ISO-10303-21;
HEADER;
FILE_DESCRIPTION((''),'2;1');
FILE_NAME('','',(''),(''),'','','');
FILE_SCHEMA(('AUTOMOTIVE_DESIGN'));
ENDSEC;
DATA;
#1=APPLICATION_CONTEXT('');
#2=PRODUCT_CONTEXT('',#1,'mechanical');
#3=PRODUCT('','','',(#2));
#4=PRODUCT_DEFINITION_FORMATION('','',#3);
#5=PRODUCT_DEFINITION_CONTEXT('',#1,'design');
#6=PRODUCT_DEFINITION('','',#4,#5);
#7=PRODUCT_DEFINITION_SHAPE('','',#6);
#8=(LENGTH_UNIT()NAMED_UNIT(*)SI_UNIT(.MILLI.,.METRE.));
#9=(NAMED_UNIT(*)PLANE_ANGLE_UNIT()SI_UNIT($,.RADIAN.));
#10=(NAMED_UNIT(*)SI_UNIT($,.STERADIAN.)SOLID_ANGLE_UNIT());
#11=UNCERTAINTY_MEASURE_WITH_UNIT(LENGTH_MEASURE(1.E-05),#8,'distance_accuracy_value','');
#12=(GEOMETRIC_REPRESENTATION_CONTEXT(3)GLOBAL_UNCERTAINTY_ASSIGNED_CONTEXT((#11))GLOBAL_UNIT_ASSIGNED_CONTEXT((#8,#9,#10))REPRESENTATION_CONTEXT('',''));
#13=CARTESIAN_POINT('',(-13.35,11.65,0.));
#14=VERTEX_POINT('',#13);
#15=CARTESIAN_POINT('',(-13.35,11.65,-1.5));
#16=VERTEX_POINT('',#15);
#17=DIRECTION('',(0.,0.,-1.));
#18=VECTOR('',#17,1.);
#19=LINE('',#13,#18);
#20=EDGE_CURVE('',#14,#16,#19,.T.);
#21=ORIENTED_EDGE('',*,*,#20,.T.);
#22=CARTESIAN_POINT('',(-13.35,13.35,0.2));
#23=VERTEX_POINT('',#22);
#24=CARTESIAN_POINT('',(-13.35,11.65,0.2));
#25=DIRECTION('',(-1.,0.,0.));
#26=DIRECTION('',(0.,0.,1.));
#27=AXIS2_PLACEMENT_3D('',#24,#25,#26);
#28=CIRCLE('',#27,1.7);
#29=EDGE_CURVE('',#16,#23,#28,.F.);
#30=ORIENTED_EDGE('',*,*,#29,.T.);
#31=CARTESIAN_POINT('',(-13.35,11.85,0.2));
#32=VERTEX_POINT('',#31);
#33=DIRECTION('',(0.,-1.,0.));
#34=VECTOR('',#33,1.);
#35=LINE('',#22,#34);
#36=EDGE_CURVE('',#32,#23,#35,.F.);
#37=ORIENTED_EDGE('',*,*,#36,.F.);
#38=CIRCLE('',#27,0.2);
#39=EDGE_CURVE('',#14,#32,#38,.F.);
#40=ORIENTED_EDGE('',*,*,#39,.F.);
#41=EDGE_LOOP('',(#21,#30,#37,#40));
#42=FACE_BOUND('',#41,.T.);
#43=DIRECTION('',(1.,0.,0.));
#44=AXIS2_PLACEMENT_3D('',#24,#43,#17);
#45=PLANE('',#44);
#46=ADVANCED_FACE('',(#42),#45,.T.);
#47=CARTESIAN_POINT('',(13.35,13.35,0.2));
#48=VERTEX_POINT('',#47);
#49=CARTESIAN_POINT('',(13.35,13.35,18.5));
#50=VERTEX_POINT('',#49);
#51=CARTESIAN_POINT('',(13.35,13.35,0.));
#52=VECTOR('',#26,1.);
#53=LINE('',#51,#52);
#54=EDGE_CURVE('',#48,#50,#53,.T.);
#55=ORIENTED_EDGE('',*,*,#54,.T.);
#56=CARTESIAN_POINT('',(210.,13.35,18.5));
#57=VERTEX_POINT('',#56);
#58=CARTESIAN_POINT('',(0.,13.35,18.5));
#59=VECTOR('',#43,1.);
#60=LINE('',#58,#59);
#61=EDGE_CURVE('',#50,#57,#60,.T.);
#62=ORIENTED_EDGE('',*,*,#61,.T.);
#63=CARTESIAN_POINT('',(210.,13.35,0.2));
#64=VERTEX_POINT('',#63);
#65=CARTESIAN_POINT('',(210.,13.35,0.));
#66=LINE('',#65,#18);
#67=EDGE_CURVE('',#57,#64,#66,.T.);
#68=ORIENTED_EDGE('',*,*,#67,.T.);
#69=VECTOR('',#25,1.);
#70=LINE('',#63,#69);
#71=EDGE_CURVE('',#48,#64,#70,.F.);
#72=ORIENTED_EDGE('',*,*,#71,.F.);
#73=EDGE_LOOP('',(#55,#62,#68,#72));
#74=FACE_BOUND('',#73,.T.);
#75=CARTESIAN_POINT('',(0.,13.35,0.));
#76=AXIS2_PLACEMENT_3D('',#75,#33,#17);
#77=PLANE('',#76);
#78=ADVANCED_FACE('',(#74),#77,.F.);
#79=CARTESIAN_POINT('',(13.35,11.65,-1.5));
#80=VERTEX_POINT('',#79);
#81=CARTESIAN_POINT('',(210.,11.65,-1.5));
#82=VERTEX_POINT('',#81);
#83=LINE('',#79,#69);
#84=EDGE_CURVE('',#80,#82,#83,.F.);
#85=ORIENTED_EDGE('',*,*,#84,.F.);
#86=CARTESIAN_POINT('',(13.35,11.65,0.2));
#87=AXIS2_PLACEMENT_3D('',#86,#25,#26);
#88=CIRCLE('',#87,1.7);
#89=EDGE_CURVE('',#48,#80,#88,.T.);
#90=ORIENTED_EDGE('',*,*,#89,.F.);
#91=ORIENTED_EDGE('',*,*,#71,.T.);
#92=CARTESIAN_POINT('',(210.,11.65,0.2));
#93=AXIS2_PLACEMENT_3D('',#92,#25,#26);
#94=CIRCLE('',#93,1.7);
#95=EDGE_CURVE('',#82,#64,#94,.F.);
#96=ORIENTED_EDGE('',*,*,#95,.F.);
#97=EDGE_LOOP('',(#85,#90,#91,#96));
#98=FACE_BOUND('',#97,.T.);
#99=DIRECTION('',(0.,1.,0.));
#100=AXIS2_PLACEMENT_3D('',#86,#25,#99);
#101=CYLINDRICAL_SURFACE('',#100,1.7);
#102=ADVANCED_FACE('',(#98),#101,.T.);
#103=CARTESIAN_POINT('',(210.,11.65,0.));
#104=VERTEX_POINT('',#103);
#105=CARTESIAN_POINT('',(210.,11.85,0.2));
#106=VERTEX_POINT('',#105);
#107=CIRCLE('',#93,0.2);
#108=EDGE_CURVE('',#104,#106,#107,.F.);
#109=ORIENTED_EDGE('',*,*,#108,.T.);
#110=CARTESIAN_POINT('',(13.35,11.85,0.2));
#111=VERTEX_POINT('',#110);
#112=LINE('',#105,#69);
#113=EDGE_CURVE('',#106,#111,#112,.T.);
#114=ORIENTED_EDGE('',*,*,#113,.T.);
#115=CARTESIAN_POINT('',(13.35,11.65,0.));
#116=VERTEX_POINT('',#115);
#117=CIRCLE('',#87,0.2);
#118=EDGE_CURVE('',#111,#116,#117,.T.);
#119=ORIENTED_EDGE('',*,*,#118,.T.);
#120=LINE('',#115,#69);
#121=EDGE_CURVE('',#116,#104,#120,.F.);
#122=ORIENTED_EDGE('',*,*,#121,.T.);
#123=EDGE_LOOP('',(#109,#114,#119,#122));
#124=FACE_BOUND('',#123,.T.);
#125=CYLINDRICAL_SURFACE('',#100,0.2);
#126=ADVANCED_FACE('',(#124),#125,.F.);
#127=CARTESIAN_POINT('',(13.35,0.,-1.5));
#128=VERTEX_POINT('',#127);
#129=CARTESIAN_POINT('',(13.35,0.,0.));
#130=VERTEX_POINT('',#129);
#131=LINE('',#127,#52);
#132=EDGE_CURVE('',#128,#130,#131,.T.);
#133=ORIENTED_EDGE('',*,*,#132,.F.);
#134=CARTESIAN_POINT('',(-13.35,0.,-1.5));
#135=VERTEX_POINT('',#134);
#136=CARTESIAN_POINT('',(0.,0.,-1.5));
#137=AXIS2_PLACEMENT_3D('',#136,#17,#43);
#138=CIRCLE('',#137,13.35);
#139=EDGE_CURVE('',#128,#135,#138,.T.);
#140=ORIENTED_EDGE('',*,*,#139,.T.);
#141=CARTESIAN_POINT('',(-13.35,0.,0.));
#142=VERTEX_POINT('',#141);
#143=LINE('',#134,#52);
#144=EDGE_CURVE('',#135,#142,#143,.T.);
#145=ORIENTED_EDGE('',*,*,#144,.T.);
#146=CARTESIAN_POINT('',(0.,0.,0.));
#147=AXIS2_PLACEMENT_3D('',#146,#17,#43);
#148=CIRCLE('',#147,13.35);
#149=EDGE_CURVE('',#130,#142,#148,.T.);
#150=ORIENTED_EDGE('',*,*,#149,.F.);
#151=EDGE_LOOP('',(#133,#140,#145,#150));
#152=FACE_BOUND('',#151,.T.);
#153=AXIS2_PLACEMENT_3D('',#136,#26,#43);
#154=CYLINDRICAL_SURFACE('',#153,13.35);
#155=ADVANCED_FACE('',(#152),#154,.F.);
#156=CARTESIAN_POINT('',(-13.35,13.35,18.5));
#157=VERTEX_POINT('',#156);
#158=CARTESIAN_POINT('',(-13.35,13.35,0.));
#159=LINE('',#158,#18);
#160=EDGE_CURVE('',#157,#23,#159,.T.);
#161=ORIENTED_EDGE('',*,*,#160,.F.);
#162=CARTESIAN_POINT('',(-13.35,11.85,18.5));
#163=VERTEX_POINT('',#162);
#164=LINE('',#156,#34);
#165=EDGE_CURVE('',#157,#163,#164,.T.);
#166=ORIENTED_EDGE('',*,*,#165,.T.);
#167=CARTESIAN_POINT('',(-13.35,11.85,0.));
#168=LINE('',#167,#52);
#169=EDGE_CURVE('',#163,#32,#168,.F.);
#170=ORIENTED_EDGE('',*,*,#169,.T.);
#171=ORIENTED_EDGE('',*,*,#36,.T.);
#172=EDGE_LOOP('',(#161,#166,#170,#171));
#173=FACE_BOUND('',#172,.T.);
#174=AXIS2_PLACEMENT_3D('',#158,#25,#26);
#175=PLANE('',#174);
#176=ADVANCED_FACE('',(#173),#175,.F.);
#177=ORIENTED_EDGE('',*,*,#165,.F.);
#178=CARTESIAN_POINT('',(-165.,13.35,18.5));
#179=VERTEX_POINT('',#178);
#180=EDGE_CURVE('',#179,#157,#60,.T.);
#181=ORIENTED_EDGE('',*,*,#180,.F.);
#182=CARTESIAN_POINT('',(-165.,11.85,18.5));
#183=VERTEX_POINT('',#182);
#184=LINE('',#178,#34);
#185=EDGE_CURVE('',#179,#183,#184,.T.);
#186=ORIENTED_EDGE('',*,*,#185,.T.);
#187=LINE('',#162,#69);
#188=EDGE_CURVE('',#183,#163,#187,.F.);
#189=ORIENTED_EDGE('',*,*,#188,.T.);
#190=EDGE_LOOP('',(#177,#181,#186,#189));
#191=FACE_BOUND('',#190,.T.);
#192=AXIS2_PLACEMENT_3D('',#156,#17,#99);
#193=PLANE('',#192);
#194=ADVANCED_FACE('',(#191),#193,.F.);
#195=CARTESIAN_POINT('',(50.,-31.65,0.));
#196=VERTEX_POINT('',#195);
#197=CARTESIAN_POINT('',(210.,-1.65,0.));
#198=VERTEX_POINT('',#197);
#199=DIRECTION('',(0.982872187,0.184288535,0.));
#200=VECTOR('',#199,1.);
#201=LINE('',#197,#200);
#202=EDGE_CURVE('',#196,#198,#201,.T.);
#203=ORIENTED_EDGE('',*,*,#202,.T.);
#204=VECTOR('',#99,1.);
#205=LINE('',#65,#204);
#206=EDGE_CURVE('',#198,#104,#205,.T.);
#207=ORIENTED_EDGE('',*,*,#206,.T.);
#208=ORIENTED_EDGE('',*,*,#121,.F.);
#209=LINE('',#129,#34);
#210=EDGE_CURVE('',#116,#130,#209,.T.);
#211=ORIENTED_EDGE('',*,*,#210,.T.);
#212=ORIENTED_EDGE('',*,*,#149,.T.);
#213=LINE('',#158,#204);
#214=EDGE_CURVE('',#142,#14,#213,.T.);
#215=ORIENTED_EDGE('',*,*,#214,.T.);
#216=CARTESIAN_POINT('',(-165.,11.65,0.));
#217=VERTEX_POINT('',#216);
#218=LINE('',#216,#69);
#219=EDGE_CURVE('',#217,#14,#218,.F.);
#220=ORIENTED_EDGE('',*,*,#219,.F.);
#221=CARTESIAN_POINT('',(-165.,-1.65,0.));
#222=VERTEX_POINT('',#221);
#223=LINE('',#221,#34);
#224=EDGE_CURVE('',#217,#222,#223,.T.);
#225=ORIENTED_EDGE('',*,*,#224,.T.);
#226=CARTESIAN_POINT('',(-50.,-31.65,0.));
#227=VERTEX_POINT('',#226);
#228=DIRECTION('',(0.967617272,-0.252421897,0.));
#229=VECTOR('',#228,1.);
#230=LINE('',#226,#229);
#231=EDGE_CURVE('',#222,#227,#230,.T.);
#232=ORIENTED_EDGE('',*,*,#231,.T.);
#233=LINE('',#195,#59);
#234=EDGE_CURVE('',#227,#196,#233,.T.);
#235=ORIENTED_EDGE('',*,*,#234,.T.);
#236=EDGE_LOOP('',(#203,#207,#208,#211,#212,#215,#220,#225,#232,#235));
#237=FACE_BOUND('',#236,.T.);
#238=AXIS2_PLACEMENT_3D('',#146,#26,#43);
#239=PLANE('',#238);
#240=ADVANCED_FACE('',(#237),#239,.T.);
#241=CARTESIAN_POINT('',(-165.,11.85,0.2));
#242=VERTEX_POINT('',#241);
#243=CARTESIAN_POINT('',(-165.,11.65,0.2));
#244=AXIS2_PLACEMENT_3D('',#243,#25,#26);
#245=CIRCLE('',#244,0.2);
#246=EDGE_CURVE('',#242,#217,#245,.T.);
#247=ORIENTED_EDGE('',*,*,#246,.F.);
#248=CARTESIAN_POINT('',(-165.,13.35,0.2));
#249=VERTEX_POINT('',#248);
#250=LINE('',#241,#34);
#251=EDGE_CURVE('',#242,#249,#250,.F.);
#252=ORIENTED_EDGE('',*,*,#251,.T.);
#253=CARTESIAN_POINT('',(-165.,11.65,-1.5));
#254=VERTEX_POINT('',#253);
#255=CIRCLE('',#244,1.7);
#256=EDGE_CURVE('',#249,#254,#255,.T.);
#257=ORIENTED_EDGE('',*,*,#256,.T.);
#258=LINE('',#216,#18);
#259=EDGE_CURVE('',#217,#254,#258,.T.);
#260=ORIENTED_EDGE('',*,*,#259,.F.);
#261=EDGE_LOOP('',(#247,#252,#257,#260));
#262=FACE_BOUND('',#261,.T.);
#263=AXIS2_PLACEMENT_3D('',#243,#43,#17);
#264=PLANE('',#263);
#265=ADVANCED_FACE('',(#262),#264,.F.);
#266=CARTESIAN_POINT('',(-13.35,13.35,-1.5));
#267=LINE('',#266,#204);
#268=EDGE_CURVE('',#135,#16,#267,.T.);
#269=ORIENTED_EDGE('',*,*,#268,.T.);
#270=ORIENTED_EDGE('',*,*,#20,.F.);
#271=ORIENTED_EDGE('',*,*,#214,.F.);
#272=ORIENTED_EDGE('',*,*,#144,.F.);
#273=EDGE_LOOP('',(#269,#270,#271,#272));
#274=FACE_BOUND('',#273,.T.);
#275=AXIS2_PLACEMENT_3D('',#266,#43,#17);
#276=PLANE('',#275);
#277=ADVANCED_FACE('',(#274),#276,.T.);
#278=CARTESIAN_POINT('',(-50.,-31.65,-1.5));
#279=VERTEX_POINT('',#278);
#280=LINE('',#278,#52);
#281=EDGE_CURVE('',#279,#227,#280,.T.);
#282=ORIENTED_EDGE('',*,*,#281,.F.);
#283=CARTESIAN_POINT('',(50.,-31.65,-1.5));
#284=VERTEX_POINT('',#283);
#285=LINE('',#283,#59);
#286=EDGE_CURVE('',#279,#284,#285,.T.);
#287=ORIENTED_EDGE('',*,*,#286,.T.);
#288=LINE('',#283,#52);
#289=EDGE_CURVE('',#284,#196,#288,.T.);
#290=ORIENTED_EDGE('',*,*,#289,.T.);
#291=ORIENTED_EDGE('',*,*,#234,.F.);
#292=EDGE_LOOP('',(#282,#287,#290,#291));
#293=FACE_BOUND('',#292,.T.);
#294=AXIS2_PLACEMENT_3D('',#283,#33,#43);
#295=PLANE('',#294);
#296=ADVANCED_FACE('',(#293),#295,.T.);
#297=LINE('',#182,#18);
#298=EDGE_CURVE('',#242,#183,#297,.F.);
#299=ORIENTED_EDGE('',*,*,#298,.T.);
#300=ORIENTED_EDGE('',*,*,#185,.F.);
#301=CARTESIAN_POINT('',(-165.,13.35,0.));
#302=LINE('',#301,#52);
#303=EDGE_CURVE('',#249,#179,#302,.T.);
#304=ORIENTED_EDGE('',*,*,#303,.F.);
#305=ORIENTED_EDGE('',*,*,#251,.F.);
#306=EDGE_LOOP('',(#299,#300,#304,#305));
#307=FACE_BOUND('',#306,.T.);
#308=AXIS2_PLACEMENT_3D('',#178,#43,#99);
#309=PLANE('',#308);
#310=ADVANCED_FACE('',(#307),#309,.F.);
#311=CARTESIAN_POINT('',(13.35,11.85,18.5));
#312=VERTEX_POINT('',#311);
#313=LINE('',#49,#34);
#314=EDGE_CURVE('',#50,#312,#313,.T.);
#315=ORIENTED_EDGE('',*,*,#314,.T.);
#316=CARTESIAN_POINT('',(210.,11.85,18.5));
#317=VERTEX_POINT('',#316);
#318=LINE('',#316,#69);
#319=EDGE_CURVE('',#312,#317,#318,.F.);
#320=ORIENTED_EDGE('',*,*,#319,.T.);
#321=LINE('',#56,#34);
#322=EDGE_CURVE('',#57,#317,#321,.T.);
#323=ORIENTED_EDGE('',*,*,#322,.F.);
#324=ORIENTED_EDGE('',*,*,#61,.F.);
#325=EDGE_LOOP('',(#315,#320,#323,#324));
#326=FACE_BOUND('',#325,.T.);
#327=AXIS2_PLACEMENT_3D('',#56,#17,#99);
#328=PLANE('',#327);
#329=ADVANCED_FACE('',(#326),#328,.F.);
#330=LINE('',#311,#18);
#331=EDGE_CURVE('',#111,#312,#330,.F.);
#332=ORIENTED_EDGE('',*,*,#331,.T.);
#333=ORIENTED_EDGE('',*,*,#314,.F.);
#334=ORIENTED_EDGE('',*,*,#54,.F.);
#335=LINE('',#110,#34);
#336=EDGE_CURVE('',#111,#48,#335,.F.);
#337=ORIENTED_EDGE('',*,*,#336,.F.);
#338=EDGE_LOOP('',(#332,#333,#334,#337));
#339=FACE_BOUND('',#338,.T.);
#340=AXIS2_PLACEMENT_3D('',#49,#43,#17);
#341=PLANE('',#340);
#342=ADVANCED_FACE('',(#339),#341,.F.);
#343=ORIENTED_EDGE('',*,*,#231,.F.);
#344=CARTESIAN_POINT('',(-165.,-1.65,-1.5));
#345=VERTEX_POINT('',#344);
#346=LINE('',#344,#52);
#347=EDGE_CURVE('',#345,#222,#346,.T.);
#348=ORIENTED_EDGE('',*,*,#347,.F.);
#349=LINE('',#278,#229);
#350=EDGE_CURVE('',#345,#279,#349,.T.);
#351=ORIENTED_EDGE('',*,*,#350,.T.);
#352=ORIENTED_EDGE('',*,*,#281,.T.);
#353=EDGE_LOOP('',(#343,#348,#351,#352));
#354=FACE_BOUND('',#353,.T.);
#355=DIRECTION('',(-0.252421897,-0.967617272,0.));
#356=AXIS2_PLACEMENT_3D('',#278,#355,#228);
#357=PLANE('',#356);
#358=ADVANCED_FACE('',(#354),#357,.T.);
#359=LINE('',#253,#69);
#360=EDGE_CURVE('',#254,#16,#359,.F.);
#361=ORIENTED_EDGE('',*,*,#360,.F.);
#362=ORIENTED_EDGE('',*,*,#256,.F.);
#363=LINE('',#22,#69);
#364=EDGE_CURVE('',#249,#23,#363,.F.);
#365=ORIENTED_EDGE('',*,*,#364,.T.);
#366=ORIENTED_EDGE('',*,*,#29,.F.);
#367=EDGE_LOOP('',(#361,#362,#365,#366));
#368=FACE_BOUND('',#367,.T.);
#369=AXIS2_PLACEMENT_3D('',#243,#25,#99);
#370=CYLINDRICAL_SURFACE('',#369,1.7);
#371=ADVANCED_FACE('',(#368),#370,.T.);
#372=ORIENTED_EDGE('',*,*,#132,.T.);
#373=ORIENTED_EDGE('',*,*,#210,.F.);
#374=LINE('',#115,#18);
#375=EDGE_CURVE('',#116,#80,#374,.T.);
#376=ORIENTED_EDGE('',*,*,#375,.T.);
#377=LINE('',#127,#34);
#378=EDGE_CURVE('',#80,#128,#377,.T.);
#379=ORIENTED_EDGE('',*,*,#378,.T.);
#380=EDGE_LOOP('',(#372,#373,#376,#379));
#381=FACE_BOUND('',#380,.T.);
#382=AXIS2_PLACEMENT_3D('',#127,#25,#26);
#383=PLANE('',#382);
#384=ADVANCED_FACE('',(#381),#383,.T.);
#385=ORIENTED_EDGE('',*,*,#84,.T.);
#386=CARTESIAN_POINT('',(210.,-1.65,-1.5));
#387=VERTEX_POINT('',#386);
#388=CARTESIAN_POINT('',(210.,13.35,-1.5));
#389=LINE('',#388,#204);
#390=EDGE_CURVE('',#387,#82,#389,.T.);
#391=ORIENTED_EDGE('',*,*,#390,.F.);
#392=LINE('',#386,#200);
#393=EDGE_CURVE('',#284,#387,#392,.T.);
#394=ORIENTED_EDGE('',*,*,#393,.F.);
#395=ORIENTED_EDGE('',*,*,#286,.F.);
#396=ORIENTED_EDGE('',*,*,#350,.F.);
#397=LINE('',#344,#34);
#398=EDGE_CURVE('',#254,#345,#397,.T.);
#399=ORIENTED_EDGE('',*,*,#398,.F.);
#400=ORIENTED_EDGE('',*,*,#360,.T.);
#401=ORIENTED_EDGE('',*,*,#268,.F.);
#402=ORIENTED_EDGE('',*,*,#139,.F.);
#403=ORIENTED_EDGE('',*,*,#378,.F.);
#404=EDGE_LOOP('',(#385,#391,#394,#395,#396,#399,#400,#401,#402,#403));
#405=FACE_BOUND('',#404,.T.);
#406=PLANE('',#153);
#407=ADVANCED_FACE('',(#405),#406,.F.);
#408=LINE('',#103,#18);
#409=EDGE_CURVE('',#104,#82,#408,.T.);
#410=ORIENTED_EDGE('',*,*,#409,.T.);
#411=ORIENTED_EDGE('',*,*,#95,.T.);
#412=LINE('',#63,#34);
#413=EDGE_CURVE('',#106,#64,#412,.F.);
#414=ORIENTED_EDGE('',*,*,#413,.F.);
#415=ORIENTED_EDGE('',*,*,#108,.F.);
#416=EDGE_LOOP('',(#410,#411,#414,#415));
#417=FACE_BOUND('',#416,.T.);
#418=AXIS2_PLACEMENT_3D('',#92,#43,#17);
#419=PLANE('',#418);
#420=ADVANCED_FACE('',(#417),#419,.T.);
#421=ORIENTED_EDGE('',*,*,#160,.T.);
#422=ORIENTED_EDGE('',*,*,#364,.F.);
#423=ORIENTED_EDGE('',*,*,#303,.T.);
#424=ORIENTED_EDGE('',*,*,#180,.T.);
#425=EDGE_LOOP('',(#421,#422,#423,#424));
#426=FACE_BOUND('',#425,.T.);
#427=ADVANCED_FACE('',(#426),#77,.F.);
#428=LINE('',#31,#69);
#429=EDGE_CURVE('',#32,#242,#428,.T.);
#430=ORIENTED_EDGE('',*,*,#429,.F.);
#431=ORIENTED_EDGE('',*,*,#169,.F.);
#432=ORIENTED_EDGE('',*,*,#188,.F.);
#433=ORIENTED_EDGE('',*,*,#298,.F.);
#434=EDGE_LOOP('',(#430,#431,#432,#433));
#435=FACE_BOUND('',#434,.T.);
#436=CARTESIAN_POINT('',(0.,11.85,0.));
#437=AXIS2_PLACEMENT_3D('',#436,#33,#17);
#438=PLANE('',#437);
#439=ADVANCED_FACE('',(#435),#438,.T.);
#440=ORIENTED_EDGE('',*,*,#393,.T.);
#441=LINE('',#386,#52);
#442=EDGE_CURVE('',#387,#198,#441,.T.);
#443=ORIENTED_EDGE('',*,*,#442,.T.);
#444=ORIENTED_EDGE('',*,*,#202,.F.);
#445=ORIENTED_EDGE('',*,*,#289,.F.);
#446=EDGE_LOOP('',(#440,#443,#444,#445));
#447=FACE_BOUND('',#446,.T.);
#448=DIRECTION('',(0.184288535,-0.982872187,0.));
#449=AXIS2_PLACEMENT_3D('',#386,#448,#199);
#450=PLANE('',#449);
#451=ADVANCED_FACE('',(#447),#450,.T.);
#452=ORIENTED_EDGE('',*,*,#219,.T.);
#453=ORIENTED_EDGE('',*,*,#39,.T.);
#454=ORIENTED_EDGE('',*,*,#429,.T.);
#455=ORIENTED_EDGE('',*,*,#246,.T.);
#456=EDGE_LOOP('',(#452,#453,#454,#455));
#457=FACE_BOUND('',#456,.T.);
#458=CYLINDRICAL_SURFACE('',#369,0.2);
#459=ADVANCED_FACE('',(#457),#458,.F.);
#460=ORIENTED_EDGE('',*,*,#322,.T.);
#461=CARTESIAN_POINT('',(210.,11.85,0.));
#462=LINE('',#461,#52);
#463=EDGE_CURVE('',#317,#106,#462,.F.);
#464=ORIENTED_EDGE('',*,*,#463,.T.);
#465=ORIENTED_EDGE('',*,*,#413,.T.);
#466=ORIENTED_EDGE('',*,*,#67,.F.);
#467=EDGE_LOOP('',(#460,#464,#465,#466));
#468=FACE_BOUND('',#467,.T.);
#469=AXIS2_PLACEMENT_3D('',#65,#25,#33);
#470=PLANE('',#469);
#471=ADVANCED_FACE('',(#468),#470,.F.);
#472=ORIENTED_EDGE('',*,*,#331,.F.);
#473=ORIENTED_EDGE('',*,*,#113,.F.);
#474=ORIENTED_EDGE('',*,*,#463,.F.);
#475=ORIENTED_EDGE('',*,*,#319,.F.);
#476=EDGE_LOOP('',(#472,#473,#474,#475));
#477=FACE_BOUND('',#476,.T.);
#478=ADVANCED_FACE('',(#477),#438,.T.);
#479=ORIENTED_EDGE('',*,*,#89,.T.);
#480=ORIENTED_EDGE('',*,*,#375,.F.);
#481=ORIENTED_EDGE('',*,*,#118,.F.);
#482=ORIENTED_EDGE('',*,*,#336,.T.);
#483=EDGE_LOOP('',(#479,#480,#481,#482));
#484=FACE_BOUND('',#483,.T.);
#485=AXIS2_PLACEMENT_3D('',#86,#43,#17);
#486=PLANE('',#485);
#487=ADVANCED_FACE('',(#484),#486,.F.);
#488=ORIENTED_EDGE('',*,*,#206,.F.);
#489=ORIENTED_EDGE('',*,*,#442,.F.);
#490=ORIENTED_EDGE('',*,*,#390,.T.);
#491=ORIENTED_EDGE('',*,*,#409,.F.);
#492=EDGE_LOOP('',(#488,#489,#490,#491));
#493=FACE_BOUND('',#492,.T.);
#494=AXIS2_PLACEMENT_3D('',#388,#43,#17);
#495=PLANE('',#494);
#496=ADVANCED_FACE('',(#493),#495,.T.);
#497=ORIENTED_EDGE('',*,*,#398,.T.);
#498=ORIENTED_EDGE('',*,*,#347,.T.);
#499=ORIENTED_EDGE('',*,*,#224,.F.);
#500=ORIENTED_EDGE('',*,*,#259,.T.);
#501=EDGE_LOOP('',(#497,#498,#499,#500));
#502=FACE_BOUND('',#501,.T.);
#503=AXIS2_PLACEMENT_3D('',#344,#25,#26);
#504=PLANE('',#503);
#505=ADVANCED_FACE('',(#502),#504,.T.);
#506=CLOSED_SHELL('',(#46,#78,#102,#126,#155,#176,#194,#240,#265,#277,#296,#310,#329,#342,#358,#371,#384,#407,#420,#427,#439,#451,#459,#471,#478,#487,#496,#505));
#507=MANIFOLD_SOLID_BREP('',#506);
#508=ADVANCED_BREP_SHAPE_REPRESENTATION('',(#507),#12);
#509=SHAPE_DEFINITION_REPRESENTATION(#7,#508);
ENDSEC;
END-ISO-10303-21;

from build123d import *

# Parameters (mm, degrees)
BASE_FLANGE1_DEPTH             = 1.5
EDGE_FLANGE1_STRIP_W           = 6.4
EDGE_FLANGE1_STRIP_H           = 1.5
EDGE_FLANGE1_STRIP_CUT_DEPTH   = 151.65
EDGE_FLANGE1_STRIP_2_W         = 6.4
EDGE_FLANGE1_STRIP_2_H         = 1.5
EDGE_FLANGE1_STRIP_CUT_2_DEPTH = 196.65
EDGE_FLANGE1_DEPTH             = 151.65
EDGE_FLANGE1_BEND_DEPTH        = 196.65


# Sheet-metal steps are written as plain solids
with BuildPart() as part:
    # Sketch1 → Base-Flange1 (new body)
    with BuildSketch(Plane.XY):
        with BuildLine():
            Line((13.35, 0), (13.35, 13.35))
            Line((13.35, 13.35), (210, 13.35))
            Line((210, 13.35), (210, -1.65))
            Line((210, -1.65), (50, -31.65))
            Line((50, -31.65), (-50, -31.65))
            Line((-50, -31.65), (-165, -1.65))
            Line((-165, -1.65), (-165, 13.35))
            Line((-165, 13.35), (-13.35, 13.35))
            Line((-13.35, 13.35), (-13.35, 0))
            ThreePointArc((-13.35, 0), (0, -13.35), (13.35, 0))
        make_face()
    extrude(amount=-BASE_FLANGE1_DEPTH)

    # Edge-Flange1 strip (across the edge) → Edge-Flange1 strip cut (cut)
    with BuildSketch(Plane(origin=(-13.35, 13.35, 0), x_dir=(0, -1, 0), z_dir=(-1, 0, 0))):
        with Locations((-1.5, -0.75)):
            Rectangle(EDGE_FLANGE1_STRIP_W, EDGE_FLANGE1_STRIP_H)
    extrude(amount=EDGE_FLANGE1_STRIP_CUT_DEPTH, mode=Mode.SUBTRACT)

    # Edge-Flange1 strip 2 (across the edge) → Edge-Flange1 strip cut 2 (cut)
    with BuildSketch(Plane(origin=(210, 13.35, 0), x_dir=(0, -1, 0), z_dir=(-1, 0, 0))):
        with Locations((-1.5, -0.75)):
            Rectangle(EDGE_FLANGE1_STRIP_2_W, EDGE_FLANGE1_STRIP_2_H)
    extrude(amount=EDGE_FLANGE1_STRIP_CUT_2_DEPTH, mode=Mode.SUBTRACT)

    # Edge-Flange1 section (across the edge) → Edge-Flange1 (add)
    with BuildSketch(Plane(origin=(-13.35, 13.35, 0), x_dir=(0, -1, 0), z_dir=(-1, 0, 0))):
        with BuildLine():
            Line((0, 0.2), (0, 18.5))
            Line((0, 18.5), (1.5, 18.5))
            Line((1.5, 18.5), (1.5, 0.2))
            ThreePointArc((1.5, 0.2), (1.558578644, 0.058578644), (1.7, 0))
            Line((1.7, 0), (1.7, -1.5))
            ThreePointArc((1.7, -1.5), (0.497918472, -1.002081528), (0, 0.2))
        make_face()
    extrude(amount=EDGE_FLANGE1_DEPTH)

    # Edge-Flange1 section 2 (across the edge) → Edge-Flange1 bend (add)
    with BuildSketch(Plane(origin=(210, 13.35, 0), x_dir=(0, -1, 0), z_dir=(-1, 0, 0))):
        with BuildLine():
            Line((0, 0.2), (0, 18.5))
            Line((0, 18.5), (1.5, 18.5))
            Line((1.5, 18.5), (1.5, 0.2))
            ThreePointArc((1.5, 0.2), (1.558578644, 0.058578644), (1.7, 0))
            Line((1.7, 0), (1.7, -1.5))
            ThreePointArc((1.7, -1.5), (0.497918472, -1.002081528), (0, 0.2))
        make_face()
    extrude(amount=EDGE_FLANGE1_BEND_DEPTH)


solid = part.part
